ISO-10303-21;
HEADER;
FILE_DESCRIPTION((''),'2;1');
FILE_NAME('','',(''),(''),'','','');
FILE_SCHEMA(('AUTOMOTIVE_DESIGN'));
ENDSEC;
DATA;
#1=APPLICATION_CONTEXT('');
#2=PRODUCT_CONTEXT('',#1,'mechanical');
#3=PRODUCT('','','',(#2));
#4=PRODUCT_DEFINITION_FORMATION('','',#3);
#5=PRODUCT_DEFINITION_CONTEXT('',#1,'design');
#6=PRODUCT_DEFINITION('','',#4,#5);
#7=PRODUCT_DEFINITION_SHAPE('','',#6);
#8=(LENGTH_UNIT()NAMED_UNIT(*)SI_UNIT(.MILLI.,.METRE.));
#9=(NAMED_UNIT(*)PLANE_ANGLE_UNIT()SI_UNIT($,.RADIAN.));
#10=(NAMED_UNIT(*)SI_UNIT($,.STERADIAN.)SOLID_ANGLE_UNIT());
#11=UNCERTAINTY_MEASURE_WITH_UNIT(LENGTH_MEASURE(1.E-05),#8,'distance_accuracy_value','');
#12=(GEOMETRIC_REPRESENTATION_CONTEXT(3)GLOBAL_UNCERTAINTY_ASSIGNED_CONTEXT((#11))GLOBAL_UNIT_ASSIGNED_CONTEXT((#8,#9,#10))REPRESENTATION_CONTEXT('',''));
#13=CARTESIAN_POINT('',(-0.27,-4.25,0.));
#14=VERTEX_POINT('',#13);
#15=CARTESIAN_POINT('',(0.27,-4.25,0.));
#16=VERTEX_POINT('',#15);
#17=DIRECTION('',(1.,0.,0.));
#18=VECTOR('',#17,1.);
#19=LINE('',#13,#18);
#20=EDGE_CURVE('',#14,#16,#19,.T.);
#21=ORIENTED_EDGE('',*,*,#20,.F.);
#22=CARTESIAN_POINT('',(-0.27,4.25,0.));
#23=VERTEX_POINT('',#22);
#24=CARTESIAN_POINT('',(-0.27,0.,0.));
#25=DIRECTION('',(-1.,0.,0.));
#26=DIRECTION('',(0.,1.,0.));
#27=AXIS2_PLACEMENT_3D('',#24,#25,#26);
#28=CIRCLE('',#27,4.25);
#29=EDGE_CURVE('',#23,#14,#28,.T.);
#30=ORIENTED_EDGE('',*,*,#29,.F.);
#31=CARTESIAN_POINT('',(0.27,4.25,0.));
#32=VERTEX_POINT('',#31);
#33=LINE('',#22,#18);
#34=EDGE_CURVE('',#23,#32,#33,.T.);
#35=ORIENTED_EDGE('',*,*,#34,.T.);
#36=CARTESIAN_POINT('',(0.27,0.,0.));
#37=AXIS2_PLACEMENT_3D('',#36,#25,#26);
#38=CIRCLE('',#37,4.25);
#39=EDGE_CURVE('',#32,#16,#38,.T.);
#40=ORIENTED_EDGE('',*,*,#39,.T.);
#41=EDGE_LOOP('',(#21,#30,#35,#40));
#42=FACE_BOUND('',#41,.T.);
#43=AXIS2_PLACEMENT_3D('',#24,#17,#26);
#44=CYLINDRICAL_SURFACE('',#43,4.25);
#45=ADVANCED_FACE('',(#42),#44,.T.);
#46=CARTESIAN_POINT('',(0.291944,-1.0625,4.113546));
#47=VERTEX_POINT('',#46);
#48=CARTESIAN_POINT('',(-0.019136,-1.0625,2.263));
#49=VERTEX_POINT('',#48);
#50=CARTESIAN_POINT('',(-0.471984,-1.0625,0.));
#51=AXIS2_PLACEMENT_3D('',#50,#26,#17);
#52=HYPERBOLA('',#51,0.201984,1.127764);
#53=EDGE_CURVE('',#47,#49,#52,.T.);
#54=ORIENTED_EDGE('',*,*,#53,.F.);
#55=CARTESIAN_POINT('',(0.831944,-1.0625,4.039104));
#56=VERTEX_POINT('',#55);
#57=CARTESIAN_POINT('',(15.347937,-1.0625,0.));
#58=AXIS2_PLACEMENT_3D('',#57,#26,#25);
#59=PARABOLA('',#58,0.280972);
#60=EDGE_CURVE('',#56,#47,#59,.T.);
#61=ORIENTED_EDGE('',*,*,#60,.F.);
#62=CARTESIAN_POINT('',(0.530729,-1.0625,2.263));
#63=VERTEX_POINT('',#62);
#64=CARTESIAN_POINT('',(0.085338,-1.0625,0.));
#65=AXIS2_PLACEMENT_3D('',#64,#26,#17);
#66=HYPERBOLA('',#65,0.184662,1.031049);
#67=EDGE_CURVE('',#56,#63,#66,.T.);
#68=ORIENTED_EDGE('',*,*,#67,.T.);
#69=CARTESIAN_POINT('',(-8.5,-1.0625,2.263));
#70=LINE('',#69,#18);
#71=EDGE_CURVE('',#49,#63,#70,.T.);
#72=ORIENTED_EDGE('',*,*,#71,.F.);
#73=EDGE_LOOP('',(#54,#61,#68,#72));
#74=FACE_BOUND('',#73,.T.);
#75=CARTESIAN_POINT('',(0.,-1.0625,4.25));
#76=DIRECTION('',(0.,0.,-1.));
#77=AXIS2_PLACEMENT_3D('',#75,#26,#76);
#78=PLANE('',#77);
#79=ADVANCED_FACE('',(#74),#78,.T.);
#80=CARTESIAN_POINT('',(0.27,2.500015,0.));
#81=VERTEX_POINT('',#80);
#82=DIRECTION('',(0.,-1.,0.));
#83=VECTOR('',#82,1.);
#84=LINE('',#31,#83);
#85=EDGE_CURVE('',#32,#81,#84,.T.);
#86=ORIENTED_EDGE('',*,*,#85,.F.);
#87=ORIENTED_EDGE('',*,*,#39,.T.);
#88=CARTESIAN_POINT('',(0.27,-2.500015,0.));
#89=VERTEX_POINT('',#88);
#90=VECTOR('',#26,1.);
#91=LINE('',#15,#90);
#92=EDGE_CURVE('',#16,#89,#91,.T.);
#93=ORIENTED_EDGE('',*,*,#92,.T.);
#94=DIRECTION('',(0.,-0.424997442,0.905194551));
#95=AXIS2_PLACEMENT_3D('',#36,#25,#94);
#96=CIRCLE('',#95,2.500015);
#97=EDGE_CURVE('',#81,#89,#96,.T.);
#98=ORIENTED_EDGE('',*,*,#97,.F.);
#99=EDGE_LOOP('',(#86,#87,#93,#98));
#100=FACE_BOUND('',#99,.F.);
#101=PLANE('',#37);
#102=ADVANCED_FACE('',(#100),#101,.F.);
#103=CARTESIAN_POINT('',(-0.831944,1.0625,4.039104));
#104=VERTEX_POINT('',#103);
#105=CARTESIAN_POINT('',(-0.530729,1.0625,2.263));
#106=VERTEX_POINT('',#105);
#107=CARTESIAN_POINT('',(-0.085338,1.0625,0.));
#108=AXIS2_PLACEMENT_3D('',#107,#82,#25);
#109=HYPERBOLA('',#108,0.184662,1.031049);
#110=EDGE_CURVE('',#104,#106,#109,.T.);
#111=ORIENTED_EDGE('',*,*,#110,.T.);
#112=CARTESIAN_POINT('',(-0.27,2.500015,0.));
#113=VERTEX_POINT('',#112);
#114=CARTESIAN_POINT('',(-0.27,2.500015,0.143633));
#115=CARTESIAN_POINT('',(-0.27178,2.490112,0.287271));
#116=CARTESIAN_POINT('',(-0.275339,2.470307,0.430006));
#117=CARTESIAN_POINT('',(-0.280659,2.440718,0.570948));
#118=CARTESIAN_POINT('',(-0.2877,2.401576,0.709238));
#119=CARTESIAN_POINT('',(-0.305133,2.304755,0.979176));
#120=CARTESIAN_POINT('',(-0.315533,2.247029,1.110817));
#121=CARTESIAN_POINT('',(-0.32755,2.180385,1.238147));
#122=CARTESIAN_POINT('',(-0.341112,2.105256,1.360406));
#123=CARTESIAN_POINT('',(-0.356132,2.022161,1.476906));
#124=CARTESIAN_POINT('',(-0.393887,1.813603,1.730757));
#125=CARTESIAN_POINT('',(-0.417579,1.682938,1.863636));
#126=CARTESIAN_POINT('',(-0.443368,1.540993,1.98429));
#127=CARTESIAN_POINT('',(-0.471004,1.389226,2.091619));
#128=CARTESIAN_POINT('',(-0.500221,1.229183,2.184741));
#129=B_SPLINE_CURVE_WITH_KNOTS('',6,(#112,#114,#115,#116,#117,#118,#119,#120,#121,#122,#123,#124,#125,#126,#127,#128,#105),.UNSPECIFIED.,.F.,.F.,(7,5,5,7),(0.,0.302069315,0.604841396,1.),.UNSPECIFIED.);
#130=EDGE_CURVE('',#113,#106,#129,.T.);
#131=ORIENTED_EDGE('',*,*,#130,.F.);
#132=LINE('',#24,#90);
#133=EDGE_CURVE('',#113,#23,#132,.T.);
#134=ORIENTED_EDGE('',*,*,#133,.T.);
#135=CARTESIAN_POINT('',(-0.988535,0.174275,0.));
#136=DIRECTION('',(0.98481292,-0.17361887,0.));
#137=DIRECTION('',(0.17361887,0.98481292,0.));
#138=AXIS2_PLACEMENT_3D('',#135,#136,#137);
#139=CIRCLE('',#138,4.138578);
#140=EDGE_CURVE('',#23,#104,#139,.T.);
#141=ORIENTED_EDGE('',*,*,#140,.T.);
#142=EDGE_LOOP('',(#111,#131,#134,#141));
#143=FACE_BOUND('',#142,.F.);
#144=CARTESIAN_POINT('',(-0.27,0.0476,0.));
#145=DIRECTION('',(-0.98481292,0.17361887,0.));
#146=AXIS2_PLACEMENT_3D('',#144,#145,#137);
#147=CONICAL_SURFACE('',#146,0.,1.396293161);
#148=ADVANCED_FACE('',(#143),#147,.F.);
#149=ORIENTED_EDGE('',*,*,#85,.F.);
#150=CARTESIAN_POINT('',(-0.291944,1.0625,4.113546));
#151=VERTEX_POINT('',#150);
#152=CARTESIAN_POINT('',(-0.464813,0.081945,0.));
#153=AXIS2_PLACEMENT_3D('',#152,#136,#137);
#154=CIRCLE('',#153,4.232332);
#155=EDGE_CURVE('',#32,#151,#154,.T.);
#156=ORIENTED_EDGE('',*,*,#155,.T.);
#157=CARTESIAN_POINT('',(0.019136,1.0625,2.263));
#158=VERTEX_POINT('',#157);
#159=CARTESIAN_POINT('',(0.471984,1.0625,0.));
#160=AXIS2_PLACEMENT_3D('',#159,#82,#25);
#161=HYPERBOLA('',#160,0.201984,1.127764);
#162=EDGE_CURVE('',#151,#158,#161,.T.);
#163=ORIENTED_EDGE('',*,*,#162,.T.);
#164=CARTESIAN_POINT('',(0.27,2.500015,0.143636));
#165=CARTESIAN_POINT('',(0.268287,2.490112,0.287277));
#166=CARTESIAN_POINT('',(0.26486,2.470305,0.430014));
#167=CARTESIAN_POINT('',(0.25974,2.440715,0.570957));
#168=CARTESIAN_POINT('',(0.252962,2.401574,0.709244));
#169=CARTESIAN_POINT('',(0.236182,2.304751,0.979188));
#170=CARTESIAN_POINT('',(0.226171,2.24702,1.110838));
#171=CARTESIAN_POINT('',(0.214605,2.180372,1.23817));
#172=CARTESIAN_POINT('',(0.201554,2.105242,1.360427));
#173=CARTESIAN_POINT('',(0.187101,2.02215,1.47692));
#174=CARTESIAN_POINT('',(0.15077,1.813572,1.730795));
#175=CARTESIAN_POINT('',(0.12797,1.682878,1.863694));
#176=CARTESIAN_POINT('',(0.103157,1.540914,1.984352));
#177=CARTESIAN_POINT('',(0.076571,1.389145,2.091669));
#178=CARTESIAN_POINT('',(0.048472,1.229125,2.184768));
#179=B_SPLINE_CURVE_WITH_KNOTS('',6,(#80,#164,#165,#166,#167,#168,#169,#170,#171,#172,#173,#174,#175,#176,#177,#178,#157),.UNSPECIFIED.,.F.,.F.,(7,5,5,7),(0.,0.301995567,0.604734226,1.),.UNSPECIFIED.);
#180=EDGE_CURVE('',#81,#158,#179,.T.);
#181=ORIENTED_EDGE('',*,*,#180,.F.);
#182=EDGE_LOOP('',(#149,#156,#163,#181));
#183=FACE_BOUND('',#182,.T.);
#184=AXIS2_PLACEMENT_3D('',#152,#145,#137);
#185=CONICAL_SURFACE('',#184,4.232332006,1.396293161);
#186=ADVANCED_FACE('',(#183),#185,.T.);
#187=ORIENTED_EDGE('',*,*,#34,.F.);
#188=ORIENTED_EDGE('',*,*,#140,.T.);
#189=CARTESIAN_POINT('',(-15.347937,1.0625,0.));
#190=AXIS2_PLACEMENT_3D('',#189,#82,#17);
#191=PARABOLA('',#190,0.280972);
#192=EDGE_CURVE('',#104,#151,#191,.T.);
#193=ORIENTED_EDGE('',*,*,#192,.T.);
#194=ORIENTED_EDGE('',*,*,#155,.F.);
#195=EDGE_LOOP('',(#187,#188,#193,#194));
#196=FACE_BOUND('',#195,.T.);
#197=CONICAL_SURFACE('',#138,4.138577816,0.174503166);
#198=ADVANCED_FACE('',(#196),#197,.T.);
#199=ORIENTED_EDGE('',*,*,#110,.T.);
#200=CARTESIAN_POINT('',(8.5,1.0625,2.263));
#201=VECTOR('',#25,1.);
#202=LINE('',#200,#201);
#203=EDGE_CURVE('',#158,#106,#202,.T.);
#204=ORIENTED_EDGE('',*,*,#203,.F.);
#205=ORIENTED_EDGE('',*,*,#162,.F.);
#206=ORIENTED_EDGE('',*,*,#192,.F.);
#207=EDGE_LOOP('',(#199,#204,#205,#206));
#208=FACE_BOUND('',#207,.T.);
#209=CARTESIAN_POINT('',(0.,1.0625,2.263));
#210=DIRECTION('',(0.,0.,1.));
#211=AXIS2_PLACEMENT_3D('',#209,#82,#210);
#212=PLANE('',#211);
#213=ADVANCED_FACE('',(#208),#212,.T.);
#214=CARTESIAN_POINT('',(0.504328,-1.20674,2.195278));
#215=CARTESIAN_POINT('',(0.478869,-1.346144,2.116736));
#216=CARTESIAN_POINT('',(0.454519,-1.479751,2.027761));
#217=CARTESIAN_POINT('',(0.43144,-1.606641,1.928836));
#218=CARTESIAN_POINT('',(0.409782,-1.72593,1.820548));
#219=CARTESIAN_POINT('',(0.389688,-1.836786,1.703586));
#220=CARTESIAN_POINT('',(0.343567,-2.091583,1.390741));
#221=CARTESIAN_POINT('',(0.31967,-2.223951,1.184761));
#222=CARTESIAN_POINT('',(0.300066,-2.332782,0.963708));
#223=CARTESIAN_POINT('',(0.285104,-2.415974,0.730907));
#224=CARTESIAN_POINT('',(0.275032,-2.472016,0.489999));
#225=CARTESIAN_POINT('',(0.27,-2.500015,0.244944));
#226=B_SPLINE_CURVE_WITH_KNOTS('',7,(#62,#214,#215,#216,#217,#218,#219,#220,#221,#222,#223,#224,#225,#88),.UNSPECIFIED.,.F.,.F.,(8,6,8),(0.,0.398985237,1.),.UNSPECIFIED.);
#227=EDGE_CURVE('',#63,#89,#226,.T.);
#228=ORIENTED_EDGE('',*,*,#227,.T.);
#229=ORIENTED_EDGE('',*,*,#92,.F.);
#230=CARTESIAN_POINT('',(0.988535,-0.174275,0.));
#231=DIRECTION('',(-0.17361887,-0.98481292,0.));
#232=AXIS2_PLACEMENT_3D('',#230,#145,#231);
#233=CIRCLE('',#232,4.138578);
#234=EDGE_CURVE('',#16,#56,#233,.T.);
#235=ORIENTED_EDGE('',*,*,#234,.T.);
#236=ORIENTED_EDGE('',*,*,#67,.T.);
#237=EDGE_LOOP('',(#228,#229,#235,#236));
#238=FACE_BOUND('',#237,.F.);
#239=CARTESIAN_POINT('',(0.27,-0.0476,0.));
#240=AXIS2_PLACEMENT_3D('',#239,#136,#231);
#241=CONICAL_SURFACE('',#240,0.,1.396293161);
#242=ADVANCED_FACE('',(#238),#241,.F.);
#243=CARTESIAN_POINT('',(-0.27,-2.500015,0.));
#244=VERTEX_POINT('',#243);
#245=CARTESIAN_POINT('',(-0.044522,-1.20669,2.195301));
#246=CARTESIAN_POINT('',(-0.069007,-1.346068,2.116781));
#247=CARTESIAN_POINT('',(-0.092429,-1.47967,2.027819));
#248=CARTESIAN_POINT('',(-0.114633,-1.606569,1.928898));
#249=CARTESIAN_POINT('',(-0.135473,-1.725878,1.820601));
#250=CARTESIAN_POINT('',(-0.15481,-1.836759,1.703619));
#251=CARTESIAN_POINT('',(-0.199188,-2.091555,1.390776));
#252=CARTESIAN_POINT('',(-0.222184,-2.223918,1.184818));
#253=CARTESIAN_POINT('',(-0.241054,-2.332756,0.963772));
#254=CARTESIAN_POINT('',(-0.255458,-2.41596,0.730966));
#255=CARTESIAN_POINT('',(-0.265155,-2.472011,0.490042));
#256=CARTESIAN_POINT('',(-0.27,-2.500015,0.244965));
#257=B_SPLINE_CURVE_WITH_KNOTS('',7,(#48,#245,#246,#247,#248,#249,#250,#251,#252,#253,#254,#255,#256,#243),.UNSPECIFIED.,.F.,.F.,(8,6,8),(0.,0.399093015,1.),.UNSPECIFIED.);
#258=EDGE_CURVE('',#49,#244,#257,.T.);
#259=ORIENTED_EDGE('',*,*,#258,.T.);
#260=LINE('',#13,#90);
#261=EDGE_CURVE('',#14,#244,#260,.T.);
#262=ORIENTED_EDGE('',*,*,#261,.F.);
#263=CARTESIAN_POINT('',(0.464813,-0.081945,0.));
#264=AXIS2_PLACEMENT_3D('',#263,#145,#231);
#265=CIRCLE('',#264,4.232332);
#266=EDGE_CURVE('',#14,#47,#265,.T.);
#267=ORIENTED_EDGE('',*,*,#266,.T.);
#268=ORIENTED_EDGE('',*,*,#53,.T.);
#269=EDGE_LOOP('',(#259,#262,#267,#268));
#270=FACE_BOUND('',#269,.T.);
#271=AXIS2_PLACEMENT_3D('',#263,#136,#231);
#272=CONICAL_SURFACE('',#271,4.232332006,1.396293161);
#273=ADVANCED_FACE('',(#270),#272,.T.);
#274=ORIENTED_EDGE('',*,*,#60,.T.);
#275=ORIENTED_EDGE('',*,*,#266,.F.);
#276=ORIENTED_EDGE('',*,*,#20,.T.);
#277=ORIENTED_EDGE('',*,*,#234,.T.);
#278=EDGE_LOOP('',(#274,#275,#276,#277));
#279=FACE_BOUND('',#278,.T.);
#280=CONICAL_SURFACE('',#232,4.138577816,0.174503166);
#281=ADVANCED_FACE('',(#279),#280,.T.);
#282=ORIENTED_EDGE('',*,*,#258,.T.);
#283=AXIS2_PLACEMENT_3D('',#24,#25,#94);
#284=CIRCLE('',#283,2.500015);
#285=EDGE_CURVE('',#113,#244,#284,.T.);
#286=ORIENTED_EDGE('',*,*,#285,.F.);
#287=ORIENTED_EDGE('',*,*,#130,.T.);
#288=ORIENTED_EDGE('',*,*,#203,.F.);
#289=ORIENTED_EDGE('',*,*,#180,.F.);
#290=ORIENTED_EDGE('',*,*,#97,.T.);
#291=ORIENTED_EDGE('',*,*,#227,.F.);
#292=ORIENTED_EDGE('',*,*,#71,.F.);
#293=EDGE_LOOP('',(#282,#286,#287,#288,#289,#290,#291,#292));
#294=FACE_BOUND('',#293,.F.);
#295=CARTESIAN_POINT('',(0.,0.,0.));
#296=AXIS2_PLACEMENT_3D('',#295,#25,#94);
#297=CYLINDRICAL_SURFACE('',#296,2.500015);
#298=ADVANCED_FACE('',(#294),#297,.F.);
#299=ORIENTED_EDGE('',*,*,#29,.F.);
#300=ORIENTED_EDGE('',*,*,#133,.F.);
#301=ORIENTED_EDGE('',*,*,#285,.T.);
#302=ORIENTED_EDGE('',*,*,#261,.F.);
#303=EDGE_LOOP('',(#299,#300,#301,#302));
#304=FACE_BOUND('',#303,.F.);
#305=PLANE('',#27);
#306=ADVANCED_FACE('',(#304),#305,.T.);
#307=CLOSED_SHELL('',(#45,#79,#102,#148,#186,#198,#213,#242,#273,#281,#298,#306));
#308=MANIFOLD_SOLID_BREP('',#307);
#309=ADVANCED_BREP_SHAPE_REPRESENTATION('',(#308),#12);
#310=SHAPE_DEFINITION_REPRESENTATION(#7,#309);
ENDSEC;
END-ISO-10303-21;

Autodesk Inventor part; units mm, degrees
sketch "Sketch_1" plane through (0, 0, 0) normal (0, 0, 1) x (1, 0, 0)
  line L0 (0.27, 0) -> (-0.27, 0)
  line L1 (-0.27, 0) -> (-0.27, 4.25)
  line L2 (-0.27, 4.25) -> (0.27, 4.25)
  line L3 (0.27, 4.25) -> (0.27, 0)
  line L4 (0.27, 0) -> (-0.27, 0)
revolve "Revolution1" add sketch "Sketch_1" angle 180 about axis through (0.27, 0, 0) along (-1, 0, 0)
sketch "Sketch_2" plane through (0, 0, 0) normal (0, 0, 1) x (1, 0, 0)
  line L0 (0.27, -0.0476) -> (-0.27, 0.0476)
  line L1 (-0.27, 0.0476) -> (-0.27, 4.25)
  line L2 (-0.27, 4.25) -> (0.27, 4.25)
  line L3 (0.27, 4.25) -> (0.27, -0.0476)
  line L4 (0.27, -0.0476) -> (-0.27, 0.0476)
revolve "Revolution2" add sketch "Sketch_2" angle 90 about axis through (0.27, -0.0476, 0) along (0.9848078, -0.1736482, 0)
sketch "Sketch_3" plane through (0, 0, 0) normal (0, 0, 1) x (1, 0, 0)
  line L0 (-0.27, 0.0476) -> (0.27, -0.0476)
  line L1 (0.27, -0.0476) -> (0.27, -4.25)
  line L2 (0.27, -4.25) -> (-0.27, -4.25)
  line L3 (-0.27, -4.25) -> (-0.27, 0.0476)
  line L4 (-0.27, 0.0476) -> (0.27, -0.0476)
revolve "Revolution3" add sketch "Sketch_3" angle 90 about axis through (-0.27, 0.0476, 0) along (-0.9848078, 0.1736482, 0)
sketch "Sketch_4" plane through (0, 0, 0) normal (1, 0, 0) x (0, 1, 0)
  line L0 (-1.0625, 4.25) -> (-1.0625, 2.263)
  arc A0 (-1.0625, 2.263) -> (1.0625, 2.263) centre (0, 0) ccw
  line L1 (1.0625, 2.263) -> (1.0625, 4.25)
  line L2 (1.0625, 4.25) -> (-1.0625, 4.25)
extrude "Extrusion1" cut sketch "Sketch_4" along normal mid plane 17
ref_plane "spring_washer_to_bolt_XY" through (0, 0, 0) normal (1, 0, 0) x (0, 0, -1)
ref_plane "spring_washer_to_bolt_YZ" through (0, 0, 0) normal (0, 0, -1) x (0, 1, 0)
ref_plane "spring_washer_to_bolt_ZX" through (0, 0, 0) normal (0, 1, 0) x (1, 0, 0)
properties part number "Washer-Spring5"
